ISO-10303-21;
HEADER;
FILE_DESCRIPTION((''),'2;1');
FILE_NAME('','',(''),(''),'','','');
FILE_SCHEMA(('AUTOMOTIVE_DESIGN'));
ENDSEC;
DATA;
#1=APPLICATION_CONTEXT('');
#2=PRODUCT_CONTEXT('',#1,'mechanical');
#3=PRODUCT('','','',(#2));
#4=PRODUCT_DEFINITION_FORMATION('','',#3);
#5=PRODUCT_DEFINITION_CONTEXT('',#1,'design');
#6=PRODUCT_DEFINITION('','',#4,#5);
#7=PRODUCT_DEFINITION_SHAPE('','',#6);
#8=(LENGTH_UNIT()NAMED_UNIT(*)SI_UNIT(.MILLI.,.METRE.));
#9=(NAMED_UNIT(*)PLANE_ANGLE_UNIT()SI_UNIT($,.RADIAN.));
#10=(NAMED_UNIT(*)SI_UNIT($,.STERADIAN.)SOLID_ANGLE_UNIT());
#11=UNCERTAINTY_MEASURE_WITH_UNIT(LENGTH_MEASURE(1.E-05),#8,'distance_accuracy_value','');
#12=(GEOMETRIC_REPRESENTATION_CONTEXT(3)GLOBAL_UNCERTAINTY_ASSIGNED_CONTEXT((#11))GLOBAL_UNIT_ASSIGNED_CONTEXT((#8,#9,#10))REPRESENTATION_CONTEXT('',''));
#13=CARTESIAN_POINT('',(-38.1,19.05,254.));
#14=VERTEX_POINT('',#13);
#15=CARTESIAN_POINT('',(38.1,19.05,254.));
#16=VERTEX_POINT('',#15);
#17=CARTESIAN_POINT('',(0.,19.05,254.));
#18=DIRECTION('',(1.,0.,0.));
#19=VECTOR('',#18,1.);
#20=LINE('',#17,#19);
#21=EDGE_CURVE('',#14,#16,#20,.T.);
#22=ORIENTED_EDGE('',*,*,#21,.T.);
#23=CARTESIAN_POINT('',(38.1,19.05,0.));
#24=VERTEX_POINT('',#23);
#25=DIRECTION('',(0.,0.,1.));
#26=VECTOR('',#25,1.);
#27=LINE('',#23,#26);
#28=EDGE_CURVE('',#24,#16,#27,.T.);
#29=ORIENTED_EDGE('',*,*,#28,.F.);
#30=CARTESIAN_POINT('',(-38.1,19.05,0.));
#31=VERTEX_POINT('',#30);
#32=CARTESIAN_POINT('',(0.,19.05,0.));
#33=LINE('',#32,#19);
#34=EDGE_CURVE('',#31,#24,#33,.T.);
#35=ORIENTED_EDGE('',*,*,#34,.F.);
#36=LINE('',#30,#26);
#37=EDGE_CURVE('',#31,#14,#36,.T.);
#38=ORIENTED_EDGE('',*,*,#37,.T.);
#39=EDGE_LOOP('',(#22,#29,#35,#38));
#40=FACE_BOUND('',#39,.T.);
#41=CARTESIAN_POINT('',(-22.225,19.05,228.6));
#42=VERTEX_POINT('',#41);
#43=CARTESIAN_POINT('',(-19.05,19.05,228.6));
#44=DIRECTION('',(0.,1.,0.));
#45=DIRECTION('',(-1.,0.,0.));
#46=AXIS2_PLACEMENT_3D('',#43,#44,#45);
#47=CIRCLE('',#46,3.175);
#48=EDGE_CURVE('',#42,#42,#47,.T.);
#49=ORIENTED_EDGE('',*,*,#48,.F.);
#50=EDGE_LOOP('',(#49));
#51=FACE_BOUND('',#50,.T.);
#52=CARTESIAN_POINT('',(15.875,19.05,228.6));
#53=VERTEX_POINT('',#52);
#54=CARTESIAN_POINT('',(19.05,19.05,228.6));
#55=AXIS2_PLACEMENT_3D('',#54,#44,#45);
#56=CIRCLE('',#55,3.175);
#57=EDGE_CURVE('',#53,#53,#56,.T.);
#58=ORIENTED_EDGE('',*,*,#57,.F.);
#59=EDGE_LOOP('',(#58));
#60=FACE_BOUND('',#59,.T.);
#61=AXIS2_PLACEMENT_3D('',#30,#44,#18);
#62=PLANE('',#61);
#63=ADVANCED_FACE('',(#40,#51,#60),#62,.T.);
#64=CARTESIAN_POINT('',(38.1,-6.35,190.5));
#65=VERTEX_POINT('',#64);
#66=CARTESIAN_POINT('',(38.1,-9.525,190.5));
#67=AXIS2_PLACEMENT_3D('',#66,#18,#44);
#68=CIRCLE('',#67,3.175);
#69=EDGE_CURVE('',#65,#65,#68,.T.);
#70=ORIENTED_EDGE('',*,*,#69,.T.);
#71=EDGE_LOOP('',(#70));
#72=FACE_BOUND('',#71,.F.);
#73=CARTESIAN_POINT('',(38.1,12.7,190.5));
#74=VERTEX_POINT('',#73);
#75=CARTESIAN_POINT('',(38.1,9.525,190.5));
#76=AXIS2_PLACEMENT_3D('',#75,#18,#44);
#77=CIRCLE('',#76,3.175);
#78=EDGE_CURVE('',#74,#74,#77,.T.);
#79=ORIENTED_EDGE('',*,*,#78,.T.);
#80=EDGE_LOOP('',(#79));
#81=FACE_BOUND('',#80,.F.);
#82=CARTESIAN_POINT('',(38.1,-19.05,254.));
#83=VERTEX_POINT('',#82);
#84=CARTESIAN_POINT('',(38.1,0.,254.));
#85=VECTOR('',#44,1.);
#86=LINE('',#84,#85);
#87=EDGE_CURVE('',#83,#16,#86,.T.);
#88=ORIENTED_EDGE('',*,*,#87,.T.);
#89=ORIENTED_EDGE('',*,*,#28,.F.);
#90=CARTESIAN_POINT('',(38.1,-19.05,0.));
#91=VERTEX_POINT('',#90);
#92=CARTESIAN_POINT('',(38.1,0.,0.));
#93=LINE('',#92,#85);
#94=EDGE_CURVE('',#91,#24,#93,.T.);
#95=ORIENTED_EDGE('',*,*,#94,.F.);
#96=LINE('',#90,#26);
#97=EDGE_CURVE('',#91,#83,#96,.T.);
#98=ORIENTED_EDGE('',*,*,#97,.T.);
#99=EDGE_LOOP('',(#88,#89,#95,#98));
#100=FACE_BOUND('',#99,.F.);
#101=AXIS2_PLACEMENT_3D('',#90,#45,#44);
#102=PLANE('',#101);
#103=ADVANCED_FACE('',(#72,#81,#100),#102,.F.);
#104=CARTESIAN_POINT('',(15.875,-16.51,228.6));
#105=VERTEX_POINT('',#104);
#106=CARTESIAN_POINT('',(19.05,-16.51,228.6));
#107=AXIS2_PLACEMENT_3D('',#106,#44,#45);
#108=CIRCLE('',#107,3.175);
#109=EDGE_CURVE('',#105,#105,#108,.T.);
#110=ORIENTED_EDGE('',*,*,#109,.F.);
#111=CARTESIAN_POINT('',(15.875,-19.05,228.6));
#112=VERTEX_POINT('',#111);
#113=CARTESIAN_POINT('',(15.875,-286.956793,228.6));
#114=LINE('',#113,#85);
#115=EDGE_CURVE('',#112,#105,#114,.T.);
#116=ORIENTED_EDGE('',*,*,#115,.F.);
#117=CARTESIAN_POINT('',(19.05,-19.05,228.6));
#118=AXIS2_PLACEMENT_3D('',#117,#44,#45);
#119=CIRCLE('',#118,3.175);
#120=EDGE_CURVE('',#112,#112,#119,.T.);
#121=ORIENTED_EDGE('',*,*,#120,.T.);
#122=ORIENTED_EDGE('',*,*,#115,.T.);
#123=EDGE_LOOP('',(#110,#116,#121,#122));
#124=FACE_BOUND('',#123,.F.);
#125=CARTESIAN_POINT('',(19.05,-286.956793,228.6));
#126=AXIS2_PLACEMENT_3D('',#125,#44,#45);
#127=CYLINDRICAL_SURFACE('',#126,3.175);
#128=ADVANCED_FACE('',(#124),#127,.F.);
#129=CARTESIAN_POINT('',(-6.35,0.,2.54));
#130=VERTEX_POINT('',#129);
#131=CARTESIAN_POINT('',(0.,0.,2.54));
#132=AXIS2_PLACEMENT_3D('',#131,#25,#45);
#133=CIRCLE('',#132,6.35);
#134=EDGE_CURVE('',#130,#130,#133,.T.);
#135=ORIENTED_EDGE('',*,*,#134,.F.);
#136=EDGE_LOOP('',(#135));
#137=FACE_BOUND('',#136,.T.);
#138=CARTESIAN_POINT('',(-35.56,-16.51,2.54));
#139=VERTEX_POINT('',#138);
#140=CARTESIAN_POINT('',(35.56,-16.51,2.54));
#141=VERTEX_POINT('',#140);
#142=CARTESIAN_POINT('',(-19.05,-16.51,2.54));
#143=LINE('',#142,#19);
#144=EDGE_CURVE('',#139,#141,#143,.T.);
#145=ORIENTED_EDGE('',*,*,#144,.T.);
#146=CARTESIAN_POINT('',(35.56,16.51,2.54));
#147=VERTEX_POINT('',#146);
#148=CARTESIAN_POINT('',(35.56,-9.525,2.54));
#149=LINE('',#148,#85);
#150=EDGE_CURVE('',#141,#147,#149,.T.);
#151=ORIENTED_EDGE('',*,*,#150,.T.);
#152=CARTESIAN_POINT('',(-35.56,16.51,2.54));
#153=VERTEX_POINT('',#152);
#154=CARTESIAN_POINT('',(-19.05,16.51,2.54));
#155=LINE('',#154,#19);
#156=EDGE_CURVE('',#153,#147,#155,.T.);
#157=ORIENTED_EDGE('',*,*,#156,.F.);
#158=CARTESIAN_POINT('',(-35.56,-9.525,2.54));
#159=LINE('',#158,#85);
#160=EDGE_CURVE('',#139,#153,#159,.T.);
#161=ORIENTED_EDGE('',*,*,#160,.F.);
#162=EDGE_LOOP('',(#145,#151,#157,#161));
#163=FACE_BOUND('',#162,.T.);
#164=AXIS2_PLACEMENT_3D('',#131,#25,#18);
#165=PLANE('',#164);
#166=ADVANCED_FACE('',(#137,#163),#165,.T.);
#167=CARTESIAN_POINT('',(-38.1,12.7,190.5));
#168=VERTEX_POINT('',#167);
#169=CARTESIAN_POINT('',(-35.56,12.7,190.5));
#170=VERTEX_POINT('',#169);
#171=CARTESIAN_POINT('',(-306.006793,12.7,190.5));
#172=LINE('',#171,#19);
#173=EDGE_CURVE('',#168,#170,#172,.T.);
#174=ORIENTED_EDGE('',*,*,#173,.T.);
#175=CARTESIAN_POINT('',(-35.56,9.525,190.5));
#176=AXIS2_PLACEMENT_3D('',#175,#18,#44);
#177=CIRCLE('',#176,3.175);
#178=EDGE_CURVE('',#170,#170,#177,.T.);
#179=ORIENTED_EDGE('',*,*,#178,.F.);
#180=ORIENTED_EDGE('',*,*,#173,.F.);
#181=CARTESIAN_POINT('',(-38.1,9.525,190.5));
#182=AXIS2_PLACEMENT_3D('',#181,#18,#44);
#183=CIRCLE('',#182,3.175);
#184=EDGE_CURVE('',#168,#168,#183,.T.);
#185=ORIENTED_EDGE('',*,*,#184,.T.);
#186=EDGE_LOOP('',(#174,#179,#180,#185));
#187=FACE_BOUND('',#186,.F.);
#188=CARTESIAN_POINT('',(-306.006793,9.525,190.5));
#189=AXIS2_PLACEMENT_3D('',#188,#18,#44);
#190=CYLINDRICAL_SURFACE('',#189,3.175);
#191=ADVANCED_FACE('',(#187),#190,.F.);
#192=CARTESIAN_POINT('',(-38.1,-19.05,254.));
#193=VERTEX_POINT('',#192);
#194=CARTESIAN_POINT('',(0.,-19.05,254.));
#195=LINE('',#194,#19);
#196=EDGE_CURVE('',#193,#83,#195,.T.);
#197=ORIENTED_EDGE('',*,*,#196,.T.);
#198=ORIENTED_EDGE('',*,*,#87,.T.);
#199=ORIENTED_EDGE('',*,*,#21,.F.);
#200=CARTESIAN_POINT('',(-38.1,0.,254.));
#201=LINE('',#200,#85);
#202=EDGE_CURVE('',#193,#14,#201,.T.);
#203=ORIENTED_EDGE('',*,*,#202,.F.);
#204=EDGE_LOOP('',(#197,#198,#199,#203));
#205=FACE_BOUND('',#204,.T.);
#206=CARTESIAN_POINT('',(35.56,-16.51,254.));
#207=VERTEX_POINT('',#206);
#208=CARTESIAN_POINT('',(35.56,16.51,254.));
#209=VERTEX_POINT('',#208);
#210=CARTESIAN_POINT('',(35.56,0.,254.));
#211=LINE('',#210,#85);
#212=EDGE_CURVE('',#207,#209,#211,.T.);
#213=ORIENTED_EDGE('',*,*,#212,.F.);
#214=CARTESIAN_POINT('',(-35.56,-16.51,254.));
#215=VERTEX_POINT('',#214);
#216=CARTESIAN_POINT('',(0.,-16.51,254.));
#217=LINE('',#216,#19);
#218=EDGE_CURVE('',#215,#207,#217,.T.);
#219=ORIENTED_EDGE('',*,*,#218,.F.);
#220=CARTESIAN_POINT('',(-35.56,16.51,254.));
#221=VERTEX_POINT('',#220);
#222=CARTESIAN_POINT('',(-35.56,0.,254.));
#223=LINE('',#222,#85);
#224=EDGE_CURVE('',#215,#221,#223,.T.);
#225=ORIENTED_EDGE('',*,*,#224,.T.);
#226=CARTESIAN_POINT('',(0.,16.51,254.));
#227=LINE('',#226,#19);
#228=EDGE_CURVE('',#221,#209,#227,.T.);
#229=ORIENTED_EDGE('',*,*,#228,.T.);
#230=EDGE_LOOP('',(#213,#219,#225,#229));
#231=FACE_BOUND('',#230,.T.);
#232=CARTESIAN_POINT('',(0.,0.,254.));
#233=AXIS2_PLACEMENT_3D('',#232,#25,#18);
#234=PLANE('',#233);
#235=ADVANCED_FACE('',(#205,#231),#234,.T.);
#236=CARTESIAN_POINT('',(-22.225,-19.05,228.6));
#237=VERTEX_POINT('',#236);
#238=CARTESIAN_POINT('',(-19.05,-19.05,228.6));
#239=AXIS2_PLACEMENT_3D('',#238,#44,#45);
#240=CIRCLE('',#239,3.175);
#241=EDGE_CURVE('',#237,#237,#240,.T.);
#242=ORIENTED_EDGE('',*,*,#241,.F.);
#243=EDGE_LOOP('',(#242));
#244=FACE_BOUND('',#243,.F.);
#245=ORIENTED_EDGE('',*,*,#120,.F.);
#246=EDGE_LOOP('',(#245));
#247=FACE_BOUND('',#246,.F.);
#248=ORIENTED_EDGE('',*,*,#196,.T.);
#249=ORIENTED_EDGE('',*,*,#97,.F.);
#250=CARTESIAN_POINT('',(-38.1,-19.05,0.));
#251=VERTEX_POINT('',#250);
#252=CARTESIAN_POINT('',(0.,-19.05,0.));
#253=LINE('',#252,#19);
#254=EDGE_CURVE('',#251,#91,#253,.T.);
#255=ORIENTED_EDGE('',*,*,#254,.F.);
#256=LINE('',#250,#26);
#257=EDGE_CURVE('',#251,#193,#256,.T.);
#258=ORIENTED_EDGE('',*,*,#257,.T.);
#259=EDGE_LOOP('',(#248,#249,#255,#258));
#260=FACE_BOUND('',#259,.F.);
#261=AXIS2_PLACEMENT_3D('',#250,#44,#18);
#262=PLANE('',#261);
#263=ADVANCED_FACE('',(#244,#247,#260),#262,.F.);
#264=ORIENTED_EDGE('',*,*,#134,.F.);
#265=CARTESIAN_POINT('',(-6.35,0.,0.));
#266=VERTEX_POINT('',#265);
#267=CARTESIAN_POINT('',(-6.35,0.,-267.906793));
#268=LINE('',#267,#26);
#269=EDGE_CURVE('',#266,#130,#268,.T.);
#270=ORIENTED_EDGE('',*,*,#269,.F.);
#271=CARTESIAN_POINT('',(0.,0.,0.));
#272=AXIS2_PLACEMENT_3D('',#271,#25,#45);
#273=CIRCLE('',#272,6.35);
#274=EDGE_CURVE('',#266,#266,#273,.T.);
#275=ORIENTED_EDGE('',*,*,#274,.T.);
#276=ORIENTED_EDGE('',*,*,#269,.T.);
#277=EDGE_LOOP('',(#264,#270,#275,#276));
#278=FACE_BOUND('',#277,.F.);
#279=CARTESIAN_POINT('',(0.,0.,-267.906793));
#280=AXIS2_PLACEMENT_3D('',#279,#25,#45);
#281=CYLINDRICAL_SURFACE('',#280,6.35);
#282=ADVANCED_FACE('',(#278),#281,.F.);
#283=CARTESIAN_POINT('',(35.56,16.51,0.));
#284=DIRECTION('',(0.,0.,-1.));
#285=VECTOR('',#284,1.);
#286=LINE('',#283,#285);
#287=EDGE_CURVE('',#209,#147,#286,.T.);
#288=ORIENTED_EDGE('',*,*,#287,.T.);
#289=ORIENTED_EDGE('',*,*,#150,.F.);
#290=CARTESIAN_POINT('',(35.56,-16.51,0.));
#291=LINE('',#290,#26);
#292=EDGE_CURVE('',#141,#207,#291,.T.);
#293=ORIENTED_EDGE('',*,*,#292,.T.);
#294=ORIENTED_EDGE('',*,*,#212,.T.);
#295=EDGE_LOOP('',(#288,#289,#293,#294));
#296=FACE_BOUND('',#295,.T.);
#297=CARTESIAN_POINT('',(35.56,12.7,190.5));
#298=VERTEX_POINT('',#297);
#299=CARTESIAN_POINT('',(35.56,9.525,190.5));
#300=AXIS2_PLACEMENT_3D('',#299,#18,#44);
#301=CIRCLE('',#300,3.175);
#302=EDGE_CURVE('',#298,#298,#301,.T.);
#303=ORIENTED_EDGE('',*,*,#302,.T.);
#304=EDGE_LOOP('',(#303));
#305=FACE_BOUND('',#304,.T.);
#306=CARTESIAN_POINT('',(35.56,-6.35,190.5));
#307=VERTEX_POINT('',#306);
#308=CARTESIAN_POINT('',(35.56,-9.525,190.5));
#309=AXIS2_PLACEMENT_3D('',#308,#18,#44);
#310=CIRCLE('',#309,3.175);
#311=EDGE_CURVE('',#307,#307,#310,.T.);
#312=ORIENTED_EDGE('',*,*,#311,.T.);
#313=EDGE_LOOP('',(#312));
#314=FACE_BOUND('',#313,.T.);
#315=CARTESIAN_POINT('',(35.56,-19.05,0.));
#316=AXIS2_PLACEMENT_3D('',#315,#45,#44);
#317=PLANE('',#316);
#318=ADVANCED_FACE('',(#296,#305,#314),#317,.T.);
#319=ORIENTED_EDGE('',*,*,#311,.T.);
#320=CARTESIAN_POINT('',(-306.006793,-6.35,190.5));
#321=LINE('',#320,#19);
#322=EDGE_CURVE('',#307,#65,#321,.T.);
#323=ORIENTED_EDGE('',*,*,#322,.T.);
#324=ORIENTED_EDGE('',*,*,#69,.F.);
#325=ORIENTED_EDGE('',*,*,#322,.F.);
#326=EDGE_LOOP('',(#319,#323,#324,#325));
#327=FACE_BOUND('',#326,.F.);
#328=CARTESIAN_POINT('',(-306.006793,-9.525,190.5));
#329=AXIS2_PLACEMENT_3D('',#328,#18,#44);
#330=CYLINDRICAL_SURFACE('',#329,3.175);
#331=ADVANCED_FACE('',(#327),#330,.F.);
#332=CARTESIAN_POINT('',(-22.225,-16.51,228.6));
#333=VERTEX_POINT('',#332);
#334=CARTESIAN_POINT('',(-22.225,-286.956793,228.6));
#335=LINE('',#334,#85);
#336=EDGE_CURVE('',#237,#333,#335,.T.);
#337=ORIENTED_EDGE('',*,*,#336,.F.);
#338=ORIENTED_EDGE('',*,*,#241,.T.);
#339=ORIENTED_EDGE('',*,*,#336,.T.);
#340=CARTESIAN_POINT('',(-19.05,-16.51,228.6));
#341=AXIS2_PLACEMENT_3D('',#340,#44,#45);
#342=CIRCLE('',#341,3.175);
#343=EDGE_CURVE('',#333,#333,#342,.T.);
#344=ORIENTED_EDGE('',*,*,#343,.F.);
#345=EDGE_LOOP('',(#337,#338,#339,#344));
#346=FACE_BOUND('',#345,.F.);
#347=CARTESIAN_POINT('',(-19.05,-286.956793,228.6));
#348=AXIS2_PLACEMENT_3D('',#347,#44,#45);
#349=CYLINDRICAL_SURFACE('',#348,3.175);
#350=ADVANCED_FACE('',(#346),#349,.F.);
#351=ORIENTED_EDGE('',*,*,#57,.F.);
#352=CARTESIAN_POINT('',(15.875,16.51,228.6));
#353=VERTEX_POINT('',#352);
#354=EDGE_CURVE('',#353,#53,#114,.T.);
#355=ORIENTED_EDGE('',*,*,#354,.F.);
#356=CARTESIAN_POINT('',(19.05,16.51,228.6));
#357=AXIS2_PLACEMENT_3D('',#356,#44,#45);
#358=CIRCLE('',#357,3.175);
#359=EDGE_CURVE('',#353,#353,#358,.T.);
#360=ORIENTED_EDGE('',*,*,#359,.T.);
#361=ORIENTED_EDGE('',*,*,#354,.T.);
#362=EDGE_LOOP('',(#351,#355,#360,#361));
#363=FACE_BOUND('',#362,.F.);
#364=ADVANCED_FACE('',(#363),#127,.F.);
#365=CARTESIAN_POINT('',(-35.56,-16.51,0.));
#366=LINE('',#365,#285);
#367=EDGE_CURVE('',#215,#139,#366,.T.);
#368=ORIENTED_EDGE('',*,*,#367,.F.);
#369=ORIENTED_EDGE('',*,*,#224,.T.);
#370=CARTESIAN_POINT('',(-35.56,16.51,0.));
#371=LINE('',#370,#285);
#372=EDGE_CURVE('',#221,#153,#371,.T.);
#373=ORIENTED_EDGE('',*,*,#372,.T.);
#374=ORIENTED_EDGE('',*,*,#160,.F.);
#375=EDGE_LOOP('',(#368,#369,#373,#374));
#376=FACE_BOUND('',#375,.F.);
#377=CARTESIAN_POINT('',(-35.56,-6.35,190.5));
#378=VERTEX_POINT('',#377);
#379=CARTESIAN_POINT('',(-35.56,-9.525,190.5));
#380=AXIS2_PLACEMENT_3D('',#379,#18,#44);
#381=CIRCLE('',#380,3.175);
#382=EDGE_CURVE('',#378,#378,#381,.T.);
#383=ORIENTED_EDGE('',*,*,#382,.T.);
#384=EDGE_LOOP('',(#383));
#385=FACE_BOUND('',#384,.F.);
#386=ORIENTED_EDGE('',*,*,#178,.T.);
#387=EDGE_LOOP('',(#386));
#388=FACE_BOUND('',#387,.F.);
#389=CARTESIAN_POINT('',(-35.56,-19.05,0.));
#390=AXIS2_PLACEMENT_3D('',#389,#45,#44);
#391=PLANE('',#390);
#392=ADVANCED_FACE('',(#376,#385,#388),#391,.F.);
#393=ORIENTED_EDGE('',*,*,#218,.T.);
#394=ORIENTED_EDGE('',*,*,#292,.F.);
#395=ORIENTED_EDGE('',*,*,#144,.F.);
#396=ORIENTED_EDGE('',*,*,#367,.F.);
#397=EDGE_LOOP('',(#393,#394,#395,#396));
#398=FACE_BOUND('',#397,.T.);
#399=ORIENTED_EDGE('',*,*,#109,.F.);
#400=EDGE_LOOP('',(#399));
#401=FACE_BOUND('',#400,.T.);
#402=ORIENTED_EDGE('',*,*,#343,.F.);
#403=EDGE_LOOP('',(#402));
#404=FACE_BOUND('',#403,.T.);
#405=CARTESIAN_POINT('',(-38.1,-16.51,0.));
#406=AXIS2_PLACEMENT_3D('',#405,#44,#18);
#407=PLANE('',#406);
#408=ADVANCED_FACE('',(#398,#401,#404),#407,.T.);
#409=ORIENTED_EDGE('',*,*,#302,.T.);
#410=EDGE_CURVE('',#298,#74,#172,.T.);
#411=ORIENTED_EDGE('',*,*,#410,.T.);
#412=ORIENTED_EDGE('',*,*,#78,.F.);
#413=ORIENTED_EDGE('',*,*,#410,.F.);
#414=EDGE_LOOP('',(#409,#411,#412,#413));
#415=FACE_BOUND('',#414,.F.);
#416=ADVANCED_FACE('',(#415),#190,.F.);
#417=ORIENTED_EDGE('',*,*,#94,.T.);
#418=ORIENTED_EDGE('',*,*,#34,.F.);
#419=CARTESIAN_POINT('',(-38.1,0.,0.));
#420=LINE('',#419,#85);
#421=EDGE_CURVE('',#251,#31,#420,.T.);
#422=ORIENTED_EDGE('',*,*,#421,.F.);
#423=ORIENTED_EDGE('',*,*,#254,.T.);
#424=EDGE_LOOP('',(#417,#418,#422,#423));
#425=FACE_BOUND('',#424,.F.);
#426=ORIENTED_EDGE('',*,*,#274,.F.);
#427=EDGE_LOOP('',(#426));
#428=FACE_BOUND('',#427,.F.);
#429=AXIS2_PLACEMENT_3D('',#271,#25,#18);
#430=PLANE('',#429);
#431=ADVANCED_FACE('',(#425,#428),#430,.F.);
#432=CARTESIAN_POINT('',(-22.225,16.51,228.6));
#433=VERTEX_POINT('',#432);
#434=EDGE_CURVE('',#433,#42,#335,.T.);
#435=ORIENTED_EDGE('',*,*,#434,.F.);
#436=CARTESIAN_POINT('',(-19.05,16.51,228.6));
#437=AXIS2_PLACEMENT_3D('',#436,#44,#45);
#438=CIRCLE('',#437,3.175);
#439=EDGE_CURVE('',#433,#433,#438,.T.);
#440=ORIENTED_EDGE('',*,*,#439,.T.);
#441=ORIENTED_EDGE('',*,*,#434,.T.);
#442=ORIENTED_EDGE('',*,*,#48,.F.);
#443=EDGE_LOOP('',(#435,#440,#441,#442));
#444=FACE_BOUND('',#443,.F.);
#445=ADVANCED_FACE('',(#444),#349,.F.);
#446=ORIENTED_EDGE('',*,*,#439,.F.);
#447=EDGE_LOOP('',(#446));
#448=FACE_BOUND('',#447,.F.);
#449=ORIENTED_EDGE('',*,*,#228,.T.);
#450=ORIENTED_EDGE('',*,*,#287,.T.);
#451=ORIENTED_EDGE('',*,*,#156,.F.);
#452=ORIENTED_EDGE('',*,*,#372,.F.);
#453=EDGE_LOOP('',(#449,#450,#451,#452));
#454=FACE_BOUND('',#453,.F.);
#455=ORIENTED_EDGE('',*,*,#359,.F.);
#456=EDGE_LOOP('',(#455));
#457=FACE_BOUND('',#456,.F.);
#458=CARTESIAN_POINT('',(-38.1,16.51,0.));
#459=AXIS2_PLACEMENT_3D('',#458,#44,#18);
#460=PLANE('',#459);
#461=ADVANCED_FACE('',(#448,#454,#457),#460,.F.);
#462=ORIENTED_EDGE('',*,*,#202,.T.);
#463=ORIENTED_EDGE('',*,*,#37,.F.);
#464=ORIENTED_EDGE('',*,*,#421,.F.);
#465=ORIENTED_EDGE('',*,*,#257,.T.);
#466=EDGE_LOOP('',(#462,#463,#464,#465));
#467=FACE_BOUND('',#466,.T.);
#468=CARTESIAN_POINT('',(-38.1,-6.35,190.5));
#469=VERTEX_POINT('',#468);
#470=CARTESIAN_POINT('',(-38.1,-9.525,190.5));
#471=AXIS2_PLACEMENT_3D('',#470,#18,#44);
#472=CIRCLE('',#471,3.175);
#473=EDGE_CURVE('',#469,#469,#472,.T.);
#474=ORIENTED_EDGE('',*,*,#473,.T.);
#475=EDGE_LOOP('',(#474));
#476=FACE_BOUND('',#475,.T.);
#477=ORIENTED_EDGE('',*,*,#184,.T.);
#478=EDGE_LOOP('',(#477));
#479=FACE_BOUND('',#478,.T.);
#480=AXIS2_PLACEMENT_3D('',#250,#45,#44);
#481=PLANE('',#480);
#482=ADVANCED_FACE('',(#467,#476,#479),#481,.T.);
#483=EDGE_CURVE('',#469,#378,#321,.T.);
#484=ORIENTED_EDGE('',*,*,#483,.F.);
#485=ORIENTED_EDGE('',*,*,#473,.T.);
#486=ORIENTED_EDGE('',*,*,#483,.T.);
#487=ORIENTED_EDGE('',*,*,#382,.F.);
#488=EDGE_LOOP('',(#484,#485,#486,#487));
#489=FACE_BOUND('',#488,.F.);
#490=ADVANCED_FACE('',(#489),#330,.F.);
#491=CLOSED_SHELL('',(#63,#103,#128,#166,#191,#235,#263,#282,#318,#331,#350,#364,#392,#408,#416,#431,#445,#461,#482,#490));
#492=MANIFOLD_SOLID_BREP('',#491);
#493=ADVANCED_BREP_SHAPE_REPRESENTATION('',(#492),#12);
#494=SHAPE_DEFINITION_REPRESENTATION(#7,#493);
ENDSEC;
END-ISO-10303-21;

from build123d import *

# Parameters (mm, degrees)
F0_W       = 76.2
F0_H       = 38.1
F1_DEPTH   = 254
F2_T       = -2.54
F5_D       = 6.35
F5_ON_F4_D = 6.35
F7_D       = 12.7


with BuildPart() as f1:
    # F0 (on Top) → F1 (new body)
    with BuildSketch(Plane.XY):
        Rectangle(F0_W, F0_H)
    extrude(amount=F1_DEPTH)

    # F2
    f2_openings = [f1.faces().sort_by_distance(p)[0] for p in [
        (0, 0, 254),
    ]]
    offset(amount=F2_T, openings=f2_openings)

    # F5 (through all)
    with Locations(Plane(origin=(-38.1, 0, 0), x_dir=(0, -1, 0), z_dir=(-1, 0, 0))):
        with Locations((-9.525, 190.5), (9.525, 190.5)):
            Hole(F5_D / 2)

    # F5 on F4 (through all)
    with Locations(Plane.XZ.offset(19.05)):
        with Locations((-19.05, 228.6), (19.05, 228.6)):
            Hole(F5_ON_F4_D / 2)

    # F7 (through all)
    with Locations(Plane(origin=(0, 0, 0), x_dir=(1, 0, 0), z_dir=(0, 0, -1))):
        with Locations((0, 0)):
            Hole(F7_D / 2)


solid = f1.part
